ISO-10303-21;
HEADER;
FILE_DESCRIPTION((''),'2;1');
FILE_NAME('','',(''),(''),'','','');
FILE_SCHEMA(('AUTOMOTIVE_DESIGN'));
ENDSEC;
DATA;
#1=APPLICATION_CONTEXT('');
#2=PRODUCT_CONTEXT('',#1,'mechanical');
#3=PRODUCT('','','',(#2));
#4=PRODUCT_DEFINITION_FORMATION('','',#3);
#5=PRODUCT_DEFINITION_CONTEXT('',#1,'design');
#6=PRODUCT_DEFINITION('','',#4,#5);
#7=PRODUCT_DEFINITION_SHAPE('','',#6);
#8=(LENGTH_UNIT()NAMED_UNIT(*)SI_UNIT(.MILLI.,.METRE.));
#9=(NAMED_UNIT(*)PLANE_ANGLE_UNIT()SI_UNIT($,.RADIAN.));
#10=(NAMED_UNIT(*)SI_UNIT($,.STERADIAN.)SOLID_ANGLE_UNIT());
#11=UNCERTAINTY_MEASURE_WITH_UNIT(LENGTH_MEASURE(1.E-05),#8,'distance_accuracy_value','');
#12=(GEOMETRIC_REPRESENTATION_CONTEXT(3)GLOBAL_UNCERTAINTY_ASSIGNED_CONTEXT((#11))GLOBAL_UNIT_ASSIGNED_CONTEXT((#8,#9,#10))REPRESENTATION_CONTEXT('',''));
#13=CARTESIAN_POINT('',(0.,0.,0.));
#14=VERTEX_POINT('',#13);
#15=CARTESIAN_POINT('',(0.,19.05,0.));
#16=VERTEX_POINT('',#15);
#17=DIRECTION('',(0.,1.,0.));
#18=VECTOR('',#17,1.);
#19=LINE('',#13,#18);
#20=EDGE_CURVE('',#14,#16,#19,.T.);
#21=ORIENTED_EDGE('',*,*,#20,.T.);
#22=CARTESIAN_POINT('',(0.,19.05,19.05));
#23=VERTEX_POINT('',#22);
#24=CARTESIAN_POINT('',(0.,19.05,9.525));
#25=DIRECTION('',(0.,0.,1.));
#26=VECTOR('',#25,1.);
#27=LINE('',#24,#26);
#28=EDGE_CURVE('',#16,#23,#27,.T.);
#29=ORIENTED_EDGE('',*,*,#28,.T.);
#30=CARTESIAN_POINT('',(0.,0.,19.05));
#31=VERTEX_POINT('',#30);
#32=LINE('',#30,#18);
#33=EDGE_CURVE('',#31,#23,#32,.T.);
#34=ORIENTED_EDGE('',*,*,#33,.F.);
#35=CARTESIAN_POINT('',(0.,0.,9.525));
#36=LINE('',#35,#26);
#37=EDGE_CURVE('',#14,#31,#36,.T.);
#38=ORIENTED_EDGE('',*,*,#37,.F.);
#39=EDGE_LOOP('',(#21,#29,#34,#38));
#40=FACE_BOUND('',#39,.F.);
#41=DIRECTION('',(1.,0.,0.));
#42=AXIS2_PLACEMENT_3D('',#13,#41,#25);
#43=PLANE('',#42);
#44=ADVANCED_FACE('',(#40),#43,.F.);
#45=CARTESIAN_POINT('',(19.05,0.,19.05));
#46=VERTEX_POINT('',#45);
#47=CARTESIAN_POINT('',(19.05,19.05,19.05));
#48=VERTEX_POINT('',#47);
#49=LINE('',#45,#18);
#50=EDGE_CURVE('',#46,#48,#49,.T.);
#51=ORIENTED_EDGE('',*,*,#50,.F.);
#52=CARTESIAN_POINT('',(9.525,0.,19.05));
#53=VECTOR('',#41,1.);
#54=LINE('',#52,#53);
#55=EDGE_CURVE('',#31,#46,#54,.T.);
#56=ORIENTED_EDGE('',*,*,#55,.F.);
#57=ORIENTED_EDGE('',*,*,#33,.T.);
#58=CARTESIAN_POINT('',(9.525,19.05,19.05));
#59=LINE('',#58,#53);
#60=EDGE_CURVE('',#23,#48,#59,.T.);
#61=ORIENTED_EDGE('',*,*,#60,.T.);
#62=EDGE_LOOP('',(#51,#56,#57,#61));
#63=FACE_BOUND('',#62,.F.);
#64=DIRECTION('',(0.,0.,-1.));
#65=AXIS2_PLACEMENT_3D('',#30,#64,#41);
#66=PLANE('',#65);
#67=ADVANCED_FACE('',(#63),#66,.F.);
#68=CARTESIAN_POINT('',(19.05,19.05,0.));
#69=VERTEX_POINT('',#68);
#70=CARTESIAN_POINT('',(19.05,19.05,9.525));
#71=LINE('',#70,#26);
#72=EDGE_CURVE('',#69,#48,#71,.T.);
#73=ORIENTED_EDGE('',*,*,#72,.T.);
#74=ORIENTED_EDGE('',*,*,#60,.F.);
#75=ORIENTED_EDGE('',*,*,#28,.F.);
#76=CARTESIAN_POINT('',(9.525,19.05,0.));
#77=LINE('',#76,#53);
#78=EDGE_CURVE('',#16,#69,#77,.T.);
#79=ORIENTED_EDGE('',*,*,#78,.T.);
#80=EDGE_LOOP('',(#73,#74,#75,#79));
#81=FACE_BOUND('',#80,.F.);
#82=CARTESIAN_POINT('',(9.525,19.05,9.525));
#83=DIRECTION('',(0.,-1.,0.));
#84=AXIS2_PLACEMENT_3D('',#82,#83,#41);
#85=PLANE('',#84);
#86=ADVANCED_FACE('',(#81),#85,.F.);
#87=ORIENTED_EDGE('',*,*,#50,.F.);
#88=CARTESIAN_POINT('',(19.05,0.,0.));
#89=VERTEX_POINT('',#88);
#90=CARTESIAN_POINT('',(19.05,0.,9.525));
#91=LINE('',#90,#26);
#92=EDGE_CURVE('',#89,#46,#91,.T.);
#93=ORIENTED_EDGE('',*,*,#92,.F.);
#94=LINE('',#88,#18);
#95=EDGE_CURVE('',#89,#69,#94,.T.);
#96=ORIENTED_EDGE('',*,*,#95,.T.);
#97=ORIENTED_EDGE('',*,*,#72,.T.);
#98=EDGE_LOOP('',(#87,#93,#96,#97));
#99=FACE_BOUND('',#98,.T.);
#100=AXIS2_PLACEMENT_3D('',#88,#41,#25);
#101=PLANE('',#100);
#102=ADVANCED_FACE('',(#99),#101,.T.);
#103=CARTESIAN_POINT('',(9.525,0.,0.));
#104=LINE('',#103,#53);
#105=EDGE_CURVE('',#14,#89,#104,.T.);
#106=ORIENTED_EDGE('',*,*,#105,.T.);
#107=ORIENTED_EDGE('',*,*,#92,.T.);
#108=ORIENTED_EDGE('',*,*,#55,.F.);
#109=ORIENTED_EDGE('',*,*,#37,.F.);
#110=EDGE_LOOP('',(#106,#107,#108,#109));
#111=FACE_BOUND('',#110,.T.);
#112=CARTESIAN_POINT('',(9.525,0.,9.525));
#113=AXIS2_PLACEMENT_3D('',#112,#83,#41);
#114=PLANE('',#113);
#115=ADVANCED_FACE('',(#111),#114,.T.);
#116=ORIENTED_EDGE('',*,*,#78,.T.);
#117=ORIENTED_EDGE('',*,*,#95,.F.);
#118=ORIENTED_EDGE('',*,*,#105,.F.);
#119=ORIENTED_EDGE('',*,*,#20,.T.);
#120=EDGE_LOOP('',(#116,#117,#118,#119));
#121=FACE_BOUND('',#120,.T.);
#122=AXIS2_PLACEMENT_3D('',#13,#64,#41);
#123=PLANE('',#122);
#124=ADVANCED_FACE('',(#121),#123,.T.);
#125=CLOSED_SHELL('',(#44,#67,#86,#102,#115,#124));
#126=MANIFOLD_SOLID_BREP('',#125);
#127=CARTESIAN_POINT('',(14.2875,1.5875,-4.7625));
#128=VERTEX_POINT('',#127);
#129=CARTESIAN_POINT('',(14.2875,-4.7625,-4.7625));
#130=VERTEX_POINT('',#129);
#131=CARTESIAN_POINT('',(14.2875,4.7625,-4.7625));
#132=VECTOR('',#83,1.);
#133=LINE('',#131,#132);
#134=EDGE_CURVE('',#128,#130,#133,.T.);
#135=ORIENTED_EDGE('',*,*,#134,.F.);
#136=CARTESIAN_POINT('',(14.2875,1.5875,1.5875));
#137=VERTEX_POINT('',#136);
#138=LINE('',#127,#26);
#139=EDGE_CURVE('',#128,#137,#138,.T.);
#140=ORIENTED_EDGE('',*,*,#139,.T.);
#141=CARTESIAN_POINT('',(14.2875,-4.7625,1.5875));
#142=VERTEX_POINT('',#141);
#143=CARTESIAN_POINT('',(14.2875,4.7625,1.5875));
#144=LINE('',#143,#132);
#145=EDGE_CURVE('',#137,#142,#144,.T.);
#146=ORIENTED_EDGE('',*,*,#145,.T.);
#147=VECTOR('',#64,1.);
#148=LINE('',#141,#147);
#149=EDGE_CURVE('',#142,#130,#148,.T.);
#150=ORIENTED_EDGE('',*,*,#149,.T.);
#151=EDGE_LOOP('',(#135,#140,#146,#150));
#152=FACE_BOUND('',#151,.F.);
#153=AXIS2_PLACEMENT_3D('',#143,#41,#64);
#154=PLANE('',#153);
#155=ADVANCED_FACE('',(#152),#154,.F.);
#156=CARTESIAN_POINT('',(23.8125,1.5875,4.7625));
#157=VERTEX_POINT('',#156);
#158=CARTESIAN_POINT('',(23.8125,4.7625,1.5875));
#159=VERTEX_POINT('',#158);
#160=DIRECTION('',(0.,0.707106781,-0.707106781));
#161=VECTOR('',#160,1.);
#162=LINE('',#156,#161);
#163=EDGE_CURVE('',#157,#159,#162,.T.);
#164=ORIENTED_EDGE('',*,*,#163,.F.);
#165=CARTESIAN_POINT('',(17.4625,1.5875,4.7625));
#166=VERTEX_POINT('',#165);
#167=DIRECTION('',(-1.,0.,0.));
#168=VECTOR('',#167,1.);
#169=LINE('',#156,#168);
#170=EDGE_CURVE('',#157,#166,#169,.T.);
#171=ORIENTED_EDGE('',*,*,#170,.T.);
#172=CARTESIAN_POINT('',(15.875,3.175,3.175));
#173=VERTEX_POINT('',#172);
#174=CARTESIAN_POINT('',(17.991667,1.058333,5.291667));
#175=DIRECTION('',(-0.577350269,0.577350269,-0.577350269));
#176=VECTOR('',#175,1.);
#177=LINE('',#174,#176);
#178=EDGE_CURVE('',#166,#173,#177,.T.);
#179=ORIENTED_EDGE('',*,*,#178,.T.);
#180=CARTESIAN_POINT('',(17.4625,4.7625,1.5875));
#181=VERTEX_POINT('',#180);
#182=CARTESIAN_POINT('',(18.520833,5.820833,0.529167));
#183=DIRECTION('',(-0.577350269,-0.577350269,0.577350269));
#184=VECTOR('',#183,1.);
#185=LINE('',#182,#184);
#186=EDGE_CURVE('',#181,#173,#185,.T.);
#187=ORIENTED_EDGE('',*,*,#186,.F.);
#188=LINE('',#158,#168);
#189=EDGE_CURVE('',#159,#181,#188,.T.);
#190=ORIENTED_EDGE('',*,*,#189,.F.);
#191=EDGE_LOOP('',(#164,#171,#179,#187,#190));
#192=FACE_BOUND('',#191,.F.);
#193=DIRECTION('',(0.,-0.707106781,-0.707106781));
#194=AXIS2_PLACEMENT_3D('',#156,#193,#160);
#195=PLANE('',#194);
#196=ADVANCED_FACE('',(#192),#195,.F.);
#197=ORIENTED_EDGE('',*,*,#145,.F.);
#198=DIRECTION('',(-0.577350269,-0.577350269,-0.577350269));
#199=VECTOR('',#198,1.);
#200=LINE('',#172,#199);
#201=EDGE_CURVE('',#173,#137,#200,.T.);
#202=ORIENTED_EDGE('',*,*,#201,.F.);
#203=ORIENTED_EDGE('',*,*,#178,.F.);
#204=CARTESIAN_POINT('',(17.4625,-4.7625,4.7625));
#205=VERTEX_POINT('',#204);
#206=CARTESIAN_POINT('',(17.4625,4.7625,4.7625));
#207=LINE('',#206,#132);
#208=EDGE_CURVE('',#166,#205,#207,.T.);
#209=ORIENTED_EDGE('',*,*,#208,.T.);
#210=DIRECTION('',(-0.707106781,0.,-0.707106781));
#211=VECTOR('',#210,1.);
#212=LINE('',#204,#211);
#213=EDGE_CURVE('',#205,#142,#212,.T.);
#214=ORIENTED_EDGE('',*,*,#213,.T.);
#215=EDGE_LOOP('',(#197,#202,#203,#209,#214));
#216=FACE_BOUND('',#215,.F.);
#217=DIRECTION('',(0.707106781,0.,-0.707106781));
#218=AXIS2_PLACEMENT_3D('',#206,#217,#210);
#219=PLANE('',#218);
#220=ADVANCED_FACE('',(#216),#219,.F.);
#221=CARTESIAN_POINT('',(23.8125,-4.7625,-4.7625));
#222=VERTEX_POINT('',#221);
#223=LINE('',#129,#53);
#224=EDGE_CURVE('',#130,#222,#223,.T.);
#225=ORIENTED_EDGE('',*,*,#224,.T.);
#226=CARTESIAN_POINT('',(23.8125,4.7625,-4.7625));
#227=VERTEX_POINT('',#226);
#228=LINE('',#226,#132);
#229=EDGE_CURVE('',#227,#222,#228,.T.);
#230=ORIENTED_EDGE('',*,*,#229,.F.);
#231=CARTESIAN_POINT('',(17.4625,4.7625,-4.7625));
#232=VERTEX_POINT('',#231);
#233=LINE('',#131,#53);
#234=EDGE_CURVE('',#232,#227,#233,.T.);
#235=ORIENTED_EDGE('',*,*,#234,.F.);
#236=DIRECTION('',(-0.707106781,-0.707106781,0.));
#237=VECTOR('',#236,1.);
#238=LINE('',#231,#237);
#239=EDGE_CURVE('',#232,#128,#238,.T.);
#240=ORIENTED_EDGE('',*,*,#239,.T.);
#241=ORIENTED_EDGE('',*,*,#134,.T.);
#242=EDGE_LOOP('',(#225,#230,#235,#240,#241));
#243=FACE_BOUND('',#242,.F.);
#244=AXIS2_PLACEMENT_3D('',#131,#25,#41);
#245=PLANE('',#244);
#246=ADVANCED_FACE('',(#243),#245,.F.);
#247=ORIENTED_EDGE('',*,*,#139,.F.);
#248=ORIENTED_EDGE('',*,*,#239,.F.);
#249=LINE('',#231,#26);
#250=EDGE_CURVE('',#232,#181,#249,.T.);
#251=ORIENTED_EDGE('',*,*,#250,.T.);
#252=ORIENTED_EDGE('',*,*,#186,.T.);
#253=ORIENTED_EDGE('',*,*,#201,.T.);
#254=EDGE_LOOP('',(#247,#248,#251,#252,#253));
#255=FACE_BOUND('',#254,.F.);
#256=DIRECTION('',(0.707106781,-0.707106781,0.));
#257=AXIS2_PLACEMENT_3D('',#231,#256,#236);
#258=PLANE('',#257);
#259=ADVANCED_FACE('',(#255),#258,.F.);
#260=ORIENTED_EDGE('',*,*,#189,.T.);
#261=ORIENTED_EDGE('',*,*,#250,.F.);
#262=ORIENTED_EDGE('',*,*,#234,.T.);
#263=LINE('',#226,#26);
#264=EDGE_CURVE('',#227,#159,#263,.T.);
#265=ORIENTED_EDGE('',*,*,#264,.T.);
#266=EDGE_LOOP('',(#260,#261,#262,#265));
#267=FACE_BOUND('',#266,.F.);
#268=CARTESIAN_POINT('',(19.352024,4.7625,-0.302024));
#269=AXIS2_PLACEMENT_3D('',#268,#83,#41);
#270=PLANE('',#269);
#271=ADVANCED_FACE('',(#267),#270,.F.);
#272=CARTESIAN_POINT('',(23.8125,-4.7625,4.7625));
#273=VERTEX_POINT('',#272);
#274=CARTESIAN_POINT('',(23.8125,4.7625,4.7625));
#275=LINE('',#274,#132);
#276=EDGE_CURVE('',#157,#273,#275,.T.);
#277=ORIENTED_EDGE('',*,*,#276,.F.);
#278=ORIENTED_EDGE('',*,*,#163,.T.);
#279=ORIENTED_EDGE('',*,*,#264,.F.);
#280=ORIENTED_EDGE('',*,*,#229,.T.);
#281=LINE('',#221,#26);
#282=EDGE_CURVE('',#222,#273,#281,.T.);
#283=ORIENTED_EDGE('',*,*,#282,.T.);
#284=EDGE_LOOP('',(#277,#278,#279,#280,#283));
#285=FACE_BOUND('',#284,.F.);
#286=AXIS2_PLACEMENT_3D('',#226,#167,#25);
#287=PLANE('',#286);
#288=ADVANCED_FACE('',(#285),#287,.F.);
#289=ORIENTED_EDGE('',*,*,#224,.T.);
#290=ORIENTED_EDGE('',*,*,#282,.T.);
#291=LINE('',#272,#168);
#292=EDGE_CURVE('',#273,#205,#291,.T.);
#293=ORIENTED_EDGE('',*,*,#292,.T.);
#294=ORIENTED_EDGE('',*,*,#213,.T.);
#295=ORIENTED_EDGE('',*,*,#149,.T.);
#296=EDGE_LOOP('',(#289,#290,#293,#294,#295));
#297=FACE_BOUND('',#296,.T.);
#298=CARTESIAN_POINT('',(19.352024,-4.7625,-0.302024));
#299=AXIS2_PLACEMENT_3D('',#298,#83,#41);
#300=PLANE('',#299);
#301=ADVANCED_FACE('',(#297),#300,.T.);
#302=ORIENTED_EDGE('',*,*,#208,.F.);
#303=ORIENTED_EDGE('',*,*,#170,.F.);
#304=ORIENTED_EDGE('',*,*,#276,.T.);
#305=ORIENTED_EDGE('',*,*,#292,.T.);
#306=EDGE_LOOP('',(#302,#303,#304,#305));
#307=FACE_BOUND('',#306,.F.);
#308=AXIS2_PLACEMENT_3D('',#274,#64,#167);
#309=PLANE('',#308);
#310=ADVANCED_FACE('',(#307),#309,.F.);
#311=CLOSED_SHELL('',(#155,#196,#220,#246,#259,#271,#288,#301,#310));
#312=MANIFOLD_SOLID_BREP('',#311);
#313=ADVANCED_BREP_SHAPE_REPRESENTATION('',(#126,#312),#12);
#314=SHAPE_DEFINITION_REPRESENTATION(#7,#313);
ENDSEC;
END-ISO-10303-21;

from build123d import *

# Parameters (mm, degrees)
F0_W     = 19.05
F0_H     = 19.05
F1_DEPTH = 19.05
F4_DEPTH = 9.525
F6_DEPTH = 13.8938
F8_DEPTH = 12.192


# Not quite as in the source:
# - a feature names something its author has since deleted; it is built from what else it names


with BuildPart() as f1:
    # F0 (on Front) → F1 (new body)
    with BuildSketch(Plane.XZ):
        with Locations((9.525, 9.525)):
            Rectangle(F0_W, F0_H)
    extrude(amount=-F1_DEPTH)


with BuildPart() as f4:
    # F3 (on offset) → F4 (new body)
    with BuildSketch(Plane.XZ.offset(-4.7625)):
        Polygon((23.8125, 4.7625), (17.4625, 4.7625), (14.2875, 1.5875), (14.2875, -4.7625), (23.8125, -4.7625), align=None)
    extrude(amount=F4_DEPTH)

    # F5 (on face) → F6 (cut)
    with BuildSketch(Plane.YZ.offset(23.8125)):
        Polygon((4.7625, 4.7625), (1.5875, 4.7625), (4.7625, 1.5875), align=None)
    extrude(amount=-F6_DEPTH, mode=Mode.SUBTRACT)

    # F7 (on face) → F8 (cut)
    with BuildSketch(Plane(origin=(0, 0, -4.7625), x_dir=(1, 0, 0), z_dir=(0, 0, -1))):
        Polygon((14.2875, -1.5875), (14.2875, -4.7625), (17.4625, -4.7625), align=None)
    extrude(amount=-F8_DEPTH, mode=Mode.SUBTRACT)


solid = Compound([f1.part, f4.part])
